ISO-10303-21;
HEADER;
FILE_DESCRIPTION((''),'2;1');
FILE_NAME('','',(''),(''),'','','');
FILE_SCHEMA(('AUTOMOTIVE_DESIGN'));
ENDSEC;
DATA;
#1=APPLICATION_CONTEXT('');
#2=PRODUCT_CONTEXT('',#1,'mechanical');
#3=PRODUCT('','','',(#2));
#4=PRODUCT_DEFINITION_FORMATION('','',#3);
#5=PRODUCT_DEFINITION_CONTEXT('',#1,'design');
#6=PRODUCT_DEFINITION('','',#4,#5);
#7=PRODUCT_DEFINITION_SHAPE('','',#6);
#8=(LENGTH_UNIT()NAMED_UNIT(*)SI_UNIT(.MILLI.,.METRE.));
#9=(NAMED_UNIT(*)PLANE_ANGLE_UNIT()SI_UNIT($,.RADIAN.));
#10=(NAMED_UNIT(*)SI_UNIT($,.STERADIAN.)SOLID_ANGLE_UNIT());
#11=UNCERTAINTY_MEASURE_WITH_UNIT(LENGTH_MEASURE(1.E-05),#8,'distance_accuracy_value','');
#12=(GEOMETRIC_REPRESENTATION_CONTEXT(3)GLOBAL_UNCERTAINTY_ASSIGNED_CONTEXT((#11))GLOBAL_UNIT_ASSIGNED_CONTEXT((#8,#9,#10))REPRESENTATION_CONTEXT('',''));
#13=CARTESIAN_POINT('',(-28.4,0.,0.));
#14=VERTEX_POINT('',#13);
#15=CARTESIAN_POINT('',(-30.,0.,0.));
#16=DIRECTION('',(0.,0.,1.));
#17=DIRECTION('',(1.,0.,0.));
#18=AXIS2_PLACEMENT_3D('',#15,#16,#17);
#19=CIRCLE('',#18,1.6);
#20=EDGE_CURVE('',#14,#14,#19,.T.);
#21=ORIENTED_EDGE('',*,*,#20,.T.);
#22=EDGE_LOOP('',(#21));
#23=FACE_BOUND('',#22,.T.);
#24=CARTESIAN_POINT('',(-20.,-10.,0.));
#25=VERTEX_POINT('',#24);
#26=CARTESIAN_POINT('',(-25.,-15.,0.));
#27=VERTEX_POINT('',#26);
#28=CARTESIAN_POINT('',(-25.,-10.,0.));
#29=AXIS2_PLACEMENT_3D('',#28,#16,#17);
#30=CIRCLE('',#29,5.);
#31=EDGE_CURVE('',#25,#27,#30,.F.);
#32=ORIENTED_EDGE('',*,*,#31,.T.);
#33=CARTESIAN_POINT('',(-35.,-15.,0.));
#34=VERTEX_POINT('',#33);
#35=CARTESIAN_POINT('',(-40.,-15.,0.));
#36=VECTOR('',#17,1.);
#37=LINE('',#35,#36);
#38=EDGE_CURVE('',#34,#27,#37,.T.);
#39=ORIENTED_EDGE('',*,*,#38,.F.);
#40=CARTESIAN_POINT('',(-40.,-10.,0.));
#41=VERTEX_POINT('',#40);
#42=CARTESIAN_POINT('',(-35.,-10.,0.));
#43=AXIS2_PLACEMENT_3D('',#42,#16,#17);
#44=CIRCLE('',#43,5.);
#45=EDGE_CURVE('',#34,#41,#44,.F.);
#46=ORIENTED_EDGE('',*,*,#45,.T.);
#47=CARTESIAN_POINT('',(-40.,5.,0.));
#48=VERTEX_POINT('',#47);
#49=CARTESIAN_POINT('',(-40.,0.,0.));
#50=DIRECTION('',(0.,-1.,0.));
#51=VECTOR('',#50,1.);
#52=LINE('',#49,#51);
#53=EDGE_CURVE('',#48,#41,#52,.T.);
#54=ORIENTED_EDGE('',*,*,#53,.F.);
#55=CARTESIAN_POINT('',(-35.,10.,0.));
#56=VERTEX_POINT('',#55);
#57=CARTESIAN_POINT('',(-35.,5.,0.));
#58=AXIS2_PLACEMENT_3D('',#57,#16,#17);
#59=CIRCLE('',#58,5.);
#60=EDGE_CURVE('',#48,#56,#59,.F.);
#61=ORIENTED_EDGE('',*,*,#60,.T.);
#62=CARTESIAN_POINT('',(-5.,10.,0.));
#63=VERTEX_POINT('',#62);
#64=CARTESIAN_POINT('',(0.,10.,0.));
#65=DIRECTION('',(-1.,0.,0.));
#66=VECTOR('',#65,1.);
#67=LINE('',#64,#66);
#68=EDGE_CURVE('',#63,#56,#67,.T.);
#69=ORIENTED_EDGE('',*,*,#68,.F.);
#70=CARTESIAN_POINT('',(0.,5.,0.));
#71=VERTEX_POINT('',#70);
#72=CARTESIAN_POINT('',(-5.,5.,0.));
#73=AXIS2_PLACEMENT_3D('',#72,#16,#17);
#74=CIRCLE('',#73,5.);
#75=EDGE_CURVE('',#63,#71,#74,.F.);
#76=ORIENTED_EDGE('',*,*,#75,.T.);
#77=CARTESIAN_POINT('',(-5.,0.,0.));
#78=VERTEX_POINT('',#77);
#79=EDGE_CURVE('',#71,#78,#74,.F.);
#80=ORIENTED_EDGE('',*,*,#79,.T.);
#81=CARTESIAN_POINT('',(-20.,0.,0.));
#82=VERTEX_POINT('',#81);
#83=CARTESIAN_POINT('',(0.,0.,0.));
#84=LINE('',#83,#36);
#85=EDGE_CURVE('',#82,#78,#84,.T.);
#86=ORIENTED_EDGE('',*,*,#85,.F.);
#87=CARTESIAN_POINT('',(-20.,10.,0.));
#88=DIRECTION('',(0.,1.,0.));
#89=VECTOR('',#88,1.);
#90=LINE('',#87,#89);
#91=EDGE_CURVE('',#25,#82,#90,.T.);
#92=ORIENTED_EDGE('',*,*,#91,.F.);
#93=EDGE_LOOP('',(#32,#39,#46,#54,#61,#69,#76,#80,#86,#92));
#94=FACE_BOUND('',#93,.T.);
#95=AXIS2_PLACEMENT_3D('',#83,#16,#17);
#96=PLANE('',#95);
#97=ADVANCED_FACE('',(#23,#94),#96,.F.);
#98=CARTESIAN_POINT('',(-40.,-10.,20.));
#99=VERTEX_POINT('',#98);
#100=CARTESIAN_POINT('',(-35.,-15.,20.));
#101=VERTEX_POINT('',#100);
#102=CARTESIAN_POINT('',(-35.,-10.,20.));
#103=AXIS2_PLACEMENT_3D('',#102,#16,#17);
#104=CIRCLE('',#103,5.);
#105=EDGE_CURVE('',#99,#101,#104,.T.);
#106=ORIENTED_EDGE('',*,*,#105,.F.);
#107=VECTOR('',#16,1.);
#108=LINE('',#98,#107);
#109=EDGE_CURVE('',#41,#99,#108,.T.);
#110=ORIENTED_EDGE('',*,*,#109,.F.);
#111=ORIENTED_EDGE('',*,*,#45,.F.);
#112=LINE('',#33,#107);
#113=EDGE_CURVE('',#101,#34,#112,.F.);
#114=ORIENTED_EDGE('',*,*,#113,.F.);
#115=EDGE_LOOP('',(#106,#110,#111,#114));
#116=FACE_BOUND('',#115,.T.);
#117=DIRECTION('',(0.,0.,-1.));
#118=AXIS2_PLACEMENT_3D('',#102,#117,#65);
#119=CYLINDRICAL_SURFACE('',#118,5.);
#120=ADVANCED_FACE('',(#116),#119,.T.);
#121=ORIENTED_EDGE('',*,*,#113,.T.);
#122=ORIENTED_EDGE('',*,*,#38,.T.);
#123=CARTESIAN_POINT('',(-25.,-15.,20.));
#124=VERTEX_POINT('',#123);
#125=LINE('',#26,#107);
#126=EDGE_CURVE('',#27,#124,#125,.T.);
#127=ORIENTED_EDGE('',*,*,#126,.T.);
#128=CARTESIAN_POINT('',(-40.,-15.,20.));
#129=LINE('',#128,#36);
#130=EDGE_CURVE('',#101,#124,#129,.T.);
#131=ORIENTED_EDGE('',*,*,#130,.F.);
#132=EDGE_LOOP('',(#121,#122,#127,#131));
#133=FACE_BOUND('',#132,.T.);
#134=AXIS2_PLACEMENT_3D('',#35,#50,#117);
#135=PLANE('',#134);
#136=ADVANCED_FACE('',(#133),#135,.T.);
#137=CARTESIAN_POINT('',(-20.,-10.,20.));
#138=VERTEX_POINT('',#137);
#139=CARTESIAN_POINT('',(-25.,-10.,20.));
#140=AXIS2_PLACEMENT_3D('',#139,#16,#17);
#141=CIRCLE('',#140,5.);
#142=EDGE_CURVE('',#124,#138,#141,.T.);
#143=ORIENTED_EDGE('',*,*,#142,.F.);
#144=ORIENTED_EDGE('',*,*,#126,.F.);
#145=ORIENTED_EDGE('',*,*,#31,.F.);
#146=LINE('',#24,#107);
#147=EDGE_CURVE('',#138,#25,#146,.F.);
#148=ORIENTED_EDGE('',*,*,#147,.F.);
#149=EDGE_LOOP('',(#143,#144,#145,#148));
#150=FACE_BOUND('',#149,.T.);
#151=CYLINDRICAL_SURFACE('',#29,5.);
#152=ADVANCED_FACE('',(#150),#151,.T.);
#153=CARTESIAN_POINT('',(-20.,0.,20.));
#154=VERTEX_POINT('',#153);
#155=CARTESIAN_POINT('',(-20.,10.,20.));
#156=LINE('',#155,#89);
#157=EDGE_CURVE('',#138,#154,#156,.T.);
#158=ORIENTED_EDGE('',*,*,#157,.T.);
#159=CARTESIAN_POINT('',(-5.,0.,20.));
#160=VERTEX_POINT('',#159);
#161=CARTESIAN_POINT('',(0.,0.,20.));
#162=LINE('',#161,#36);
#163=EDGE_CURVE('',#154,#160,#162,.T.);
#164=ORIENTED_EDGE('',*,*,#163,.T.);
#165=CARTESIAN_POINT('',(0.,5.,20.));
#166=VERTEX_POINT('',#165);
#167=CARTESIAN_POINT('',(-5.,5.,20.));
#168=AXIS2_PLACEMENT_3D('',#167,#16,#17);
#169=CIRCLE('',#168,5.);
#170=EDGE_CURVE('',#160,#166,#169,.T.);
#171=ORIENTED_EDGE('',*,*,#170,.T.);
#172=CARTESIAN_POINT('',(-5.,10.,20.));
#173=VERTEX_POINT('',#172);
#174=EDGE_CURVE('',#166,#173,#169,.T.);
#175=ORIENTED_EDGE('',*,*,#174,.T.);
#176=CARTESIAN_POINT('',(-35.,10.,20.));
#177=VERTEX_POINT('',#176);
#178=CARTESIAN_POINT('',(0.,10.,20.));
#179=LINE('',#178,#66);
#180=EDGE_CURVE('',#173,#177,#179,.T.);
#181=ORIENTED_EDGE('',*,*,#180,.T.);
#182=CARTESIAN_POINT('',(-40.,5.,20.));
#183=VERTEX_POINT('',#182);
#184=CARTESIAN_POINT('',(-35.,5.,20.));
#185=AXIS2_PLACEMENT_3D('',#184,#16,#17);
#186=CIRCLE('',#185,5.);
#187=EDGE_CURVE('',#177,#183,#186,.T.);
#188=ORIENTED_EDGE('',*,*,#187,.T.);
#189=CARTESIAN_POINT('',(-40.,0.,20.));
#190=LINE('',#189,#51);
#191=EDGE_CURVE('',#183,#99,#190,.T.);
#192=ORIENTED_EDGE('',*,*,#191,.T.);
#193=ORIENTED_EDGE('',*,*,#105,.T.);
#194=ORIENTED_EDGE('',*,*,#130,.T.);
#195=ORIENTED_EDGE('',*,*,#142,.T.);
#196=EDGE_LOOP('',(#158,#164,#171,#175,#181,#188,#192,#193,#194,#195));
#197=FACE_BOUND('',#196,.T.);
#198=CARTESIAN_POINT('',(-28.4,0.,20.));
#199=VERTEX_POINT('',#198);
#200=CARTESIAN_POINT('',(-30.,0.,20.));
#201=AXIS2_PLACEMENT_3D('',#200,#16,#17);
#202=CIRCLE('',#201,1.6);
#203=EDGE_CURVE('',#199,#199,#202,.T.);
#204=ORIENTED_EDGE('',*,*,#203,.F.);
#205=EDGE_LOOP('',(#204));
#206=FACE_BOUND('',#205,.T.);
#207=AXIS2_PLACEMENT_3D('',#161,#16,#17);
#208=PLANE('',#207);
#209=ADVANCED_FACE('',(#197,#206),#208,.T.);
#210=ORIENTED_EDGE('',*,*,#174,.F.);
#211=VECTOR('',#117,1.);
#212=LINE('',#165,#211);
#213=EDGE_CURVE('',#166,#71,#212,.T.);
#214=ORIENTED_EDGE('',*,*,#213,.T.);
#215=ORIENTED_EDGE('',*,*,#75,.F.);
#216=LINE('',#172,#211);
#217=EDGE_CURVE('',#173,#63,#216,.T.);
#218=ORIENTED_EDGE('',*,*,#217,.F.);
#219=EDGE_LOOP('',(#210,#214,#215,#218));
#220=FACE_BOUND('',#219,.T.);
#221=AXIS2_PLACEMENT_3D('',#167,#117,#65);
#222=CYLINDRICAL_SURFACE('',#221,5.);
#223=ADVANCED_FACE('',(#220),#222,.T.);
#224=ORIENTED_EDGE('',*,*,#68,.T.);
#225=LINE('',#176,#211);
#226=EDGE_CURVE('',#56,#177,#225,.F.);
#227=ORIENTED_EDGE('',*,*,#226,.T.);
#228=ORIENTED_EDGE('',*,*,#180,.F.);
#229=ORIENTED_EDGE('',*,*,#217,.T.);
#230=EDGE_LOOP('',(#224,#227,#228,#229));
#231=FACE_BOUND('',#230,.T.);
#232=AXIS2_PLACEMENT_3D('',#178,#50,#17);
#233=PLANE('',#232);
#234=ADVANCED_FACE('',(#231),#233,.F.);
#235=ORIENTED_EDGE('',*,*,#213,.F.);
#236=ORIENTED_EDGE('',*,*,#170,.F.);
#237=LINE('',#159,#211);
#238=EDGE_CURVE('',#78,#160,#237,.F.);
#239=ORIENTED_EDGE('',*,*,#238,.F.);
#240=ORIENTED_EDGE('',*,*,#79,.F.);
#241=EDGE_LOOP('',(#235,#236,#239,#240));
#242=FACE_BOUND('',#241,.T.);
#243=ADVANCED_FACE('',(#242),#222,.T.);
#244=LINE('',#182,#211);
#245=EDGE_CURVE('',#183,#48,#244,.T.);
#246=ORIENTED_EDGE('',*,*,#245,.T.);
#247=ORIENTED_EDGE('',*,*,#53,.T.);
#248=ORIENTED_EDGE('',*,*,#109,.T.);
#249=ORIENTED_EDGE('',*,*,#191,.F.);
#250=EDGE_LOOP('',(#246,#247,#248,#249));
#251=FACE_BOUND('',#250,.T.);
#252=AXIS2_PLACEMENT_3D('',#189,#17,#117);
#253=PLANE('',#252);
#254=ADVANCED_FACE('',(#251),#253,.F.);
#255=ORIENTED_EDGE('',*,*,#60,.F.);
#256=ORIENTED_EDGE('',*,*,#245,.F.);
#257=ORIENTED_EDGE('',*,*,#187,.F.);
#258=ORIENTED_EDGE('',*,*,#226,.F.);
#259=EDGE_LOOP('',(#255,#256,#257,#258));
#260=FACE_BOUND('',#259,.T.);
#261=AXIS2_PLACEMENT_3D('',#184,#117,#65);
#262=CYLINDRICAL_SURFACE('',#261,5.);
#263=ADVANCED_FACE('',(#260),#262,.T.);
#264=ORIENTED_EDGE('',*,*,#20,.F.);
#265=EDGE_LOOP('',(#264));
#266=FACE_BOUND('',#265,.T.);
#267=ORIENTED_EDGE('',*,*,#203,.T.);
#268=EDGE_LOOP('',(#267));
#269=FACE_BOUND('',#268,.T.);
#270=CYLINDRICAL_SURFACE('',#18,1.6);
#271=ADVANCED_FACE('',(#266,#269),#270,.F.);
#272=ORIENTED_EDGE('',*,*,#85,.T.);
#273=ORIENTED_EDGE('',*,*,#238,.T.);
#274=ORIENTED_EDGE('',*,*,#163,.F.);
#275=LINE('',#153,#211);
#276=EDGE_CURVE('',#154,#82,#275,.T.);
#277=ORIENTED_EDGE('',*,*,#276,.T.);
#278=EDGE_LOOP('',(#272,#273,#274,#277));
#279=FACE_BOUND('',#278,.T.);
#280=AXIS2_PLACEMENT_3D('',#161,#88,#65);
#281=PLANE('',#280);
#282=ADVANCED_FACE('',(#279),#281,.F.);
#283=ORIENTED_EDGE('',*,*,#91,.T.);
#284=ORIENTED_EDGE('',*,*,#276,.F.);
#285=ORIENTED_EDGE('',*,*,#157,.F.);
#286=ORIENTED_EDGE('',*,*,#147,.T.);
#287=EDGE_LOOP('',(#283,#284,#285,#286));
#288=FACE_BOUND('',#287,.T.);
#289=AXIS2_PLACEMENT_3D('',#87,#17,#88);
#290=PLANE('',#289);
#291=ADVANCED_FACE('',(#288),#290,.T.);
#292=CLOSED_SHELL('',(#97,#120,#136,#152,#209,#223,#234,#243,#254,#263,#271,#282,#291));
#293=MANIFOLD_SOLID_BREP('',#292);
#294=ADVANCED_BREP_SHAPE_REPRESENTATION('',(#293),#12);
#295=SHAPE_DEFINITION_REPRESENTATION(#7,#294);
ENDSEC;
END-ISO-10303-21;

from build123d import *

# Parameters (mm, degrees)
SKETCH_1_W          = 40
SKETCH_1_H          = 10
EXTRUDE_1_DEPTH     = 20
SKETCH_2_W          = 20
SKETCH_2_H          = 25
EXTRUDE_2_DEPTH     = 20
FILLET_1_R          = 5
SKETCH_3_R          = 1.6
CUT_EXTRUDE_1_DEPTH = 48.16990566


with BuildPart() as part:
    # 草图1 → 凸台-拉伸1 (new body)
    with BuildSketch(Plane.XY):
        with Locations((-20, 5)):
            Rectangle(SKETCH_1_W, SKETCH_1_H)
    extrude(amount=EXTRUDE_1_DEPTH)

    # 草图2 → 凸台-拉伸2 (add)
    with BuildSketch(Plane.XY.offset(20)):
        with Locations((-30, -2.5)):
            Rectangle(SKETCH_2_W, SKETCH_2_H)
    extrude(amount=-EXTRUDE_2_DEPTH)

    # 圆角1
    fillet_1_edges = [part.edges().sort_by_distance(p)[0] for p in [
        (0, 10, 10),
        (0, 0, 10),
        (-20, -15, 10),
        (-40, -15, 10),
        (-40, 10, 10),
    ]]
    fillet(fillet_1_edges, radius=FILLET_1_R - 0.0001)  # a hair under: the kernel refuses the full size

    # 草图3 → 切除-拉伸1 (cut, through all)
    with BuildSketch(Plane.XY.offset(20)):
        with Locations((-30, 0)):
            Circle(SKETCH_3_R)
    extrude(amount=-CUT_EXTRUDE_1_DEPTH, mode=Mode.SUBTRACT)


solid = part.part
